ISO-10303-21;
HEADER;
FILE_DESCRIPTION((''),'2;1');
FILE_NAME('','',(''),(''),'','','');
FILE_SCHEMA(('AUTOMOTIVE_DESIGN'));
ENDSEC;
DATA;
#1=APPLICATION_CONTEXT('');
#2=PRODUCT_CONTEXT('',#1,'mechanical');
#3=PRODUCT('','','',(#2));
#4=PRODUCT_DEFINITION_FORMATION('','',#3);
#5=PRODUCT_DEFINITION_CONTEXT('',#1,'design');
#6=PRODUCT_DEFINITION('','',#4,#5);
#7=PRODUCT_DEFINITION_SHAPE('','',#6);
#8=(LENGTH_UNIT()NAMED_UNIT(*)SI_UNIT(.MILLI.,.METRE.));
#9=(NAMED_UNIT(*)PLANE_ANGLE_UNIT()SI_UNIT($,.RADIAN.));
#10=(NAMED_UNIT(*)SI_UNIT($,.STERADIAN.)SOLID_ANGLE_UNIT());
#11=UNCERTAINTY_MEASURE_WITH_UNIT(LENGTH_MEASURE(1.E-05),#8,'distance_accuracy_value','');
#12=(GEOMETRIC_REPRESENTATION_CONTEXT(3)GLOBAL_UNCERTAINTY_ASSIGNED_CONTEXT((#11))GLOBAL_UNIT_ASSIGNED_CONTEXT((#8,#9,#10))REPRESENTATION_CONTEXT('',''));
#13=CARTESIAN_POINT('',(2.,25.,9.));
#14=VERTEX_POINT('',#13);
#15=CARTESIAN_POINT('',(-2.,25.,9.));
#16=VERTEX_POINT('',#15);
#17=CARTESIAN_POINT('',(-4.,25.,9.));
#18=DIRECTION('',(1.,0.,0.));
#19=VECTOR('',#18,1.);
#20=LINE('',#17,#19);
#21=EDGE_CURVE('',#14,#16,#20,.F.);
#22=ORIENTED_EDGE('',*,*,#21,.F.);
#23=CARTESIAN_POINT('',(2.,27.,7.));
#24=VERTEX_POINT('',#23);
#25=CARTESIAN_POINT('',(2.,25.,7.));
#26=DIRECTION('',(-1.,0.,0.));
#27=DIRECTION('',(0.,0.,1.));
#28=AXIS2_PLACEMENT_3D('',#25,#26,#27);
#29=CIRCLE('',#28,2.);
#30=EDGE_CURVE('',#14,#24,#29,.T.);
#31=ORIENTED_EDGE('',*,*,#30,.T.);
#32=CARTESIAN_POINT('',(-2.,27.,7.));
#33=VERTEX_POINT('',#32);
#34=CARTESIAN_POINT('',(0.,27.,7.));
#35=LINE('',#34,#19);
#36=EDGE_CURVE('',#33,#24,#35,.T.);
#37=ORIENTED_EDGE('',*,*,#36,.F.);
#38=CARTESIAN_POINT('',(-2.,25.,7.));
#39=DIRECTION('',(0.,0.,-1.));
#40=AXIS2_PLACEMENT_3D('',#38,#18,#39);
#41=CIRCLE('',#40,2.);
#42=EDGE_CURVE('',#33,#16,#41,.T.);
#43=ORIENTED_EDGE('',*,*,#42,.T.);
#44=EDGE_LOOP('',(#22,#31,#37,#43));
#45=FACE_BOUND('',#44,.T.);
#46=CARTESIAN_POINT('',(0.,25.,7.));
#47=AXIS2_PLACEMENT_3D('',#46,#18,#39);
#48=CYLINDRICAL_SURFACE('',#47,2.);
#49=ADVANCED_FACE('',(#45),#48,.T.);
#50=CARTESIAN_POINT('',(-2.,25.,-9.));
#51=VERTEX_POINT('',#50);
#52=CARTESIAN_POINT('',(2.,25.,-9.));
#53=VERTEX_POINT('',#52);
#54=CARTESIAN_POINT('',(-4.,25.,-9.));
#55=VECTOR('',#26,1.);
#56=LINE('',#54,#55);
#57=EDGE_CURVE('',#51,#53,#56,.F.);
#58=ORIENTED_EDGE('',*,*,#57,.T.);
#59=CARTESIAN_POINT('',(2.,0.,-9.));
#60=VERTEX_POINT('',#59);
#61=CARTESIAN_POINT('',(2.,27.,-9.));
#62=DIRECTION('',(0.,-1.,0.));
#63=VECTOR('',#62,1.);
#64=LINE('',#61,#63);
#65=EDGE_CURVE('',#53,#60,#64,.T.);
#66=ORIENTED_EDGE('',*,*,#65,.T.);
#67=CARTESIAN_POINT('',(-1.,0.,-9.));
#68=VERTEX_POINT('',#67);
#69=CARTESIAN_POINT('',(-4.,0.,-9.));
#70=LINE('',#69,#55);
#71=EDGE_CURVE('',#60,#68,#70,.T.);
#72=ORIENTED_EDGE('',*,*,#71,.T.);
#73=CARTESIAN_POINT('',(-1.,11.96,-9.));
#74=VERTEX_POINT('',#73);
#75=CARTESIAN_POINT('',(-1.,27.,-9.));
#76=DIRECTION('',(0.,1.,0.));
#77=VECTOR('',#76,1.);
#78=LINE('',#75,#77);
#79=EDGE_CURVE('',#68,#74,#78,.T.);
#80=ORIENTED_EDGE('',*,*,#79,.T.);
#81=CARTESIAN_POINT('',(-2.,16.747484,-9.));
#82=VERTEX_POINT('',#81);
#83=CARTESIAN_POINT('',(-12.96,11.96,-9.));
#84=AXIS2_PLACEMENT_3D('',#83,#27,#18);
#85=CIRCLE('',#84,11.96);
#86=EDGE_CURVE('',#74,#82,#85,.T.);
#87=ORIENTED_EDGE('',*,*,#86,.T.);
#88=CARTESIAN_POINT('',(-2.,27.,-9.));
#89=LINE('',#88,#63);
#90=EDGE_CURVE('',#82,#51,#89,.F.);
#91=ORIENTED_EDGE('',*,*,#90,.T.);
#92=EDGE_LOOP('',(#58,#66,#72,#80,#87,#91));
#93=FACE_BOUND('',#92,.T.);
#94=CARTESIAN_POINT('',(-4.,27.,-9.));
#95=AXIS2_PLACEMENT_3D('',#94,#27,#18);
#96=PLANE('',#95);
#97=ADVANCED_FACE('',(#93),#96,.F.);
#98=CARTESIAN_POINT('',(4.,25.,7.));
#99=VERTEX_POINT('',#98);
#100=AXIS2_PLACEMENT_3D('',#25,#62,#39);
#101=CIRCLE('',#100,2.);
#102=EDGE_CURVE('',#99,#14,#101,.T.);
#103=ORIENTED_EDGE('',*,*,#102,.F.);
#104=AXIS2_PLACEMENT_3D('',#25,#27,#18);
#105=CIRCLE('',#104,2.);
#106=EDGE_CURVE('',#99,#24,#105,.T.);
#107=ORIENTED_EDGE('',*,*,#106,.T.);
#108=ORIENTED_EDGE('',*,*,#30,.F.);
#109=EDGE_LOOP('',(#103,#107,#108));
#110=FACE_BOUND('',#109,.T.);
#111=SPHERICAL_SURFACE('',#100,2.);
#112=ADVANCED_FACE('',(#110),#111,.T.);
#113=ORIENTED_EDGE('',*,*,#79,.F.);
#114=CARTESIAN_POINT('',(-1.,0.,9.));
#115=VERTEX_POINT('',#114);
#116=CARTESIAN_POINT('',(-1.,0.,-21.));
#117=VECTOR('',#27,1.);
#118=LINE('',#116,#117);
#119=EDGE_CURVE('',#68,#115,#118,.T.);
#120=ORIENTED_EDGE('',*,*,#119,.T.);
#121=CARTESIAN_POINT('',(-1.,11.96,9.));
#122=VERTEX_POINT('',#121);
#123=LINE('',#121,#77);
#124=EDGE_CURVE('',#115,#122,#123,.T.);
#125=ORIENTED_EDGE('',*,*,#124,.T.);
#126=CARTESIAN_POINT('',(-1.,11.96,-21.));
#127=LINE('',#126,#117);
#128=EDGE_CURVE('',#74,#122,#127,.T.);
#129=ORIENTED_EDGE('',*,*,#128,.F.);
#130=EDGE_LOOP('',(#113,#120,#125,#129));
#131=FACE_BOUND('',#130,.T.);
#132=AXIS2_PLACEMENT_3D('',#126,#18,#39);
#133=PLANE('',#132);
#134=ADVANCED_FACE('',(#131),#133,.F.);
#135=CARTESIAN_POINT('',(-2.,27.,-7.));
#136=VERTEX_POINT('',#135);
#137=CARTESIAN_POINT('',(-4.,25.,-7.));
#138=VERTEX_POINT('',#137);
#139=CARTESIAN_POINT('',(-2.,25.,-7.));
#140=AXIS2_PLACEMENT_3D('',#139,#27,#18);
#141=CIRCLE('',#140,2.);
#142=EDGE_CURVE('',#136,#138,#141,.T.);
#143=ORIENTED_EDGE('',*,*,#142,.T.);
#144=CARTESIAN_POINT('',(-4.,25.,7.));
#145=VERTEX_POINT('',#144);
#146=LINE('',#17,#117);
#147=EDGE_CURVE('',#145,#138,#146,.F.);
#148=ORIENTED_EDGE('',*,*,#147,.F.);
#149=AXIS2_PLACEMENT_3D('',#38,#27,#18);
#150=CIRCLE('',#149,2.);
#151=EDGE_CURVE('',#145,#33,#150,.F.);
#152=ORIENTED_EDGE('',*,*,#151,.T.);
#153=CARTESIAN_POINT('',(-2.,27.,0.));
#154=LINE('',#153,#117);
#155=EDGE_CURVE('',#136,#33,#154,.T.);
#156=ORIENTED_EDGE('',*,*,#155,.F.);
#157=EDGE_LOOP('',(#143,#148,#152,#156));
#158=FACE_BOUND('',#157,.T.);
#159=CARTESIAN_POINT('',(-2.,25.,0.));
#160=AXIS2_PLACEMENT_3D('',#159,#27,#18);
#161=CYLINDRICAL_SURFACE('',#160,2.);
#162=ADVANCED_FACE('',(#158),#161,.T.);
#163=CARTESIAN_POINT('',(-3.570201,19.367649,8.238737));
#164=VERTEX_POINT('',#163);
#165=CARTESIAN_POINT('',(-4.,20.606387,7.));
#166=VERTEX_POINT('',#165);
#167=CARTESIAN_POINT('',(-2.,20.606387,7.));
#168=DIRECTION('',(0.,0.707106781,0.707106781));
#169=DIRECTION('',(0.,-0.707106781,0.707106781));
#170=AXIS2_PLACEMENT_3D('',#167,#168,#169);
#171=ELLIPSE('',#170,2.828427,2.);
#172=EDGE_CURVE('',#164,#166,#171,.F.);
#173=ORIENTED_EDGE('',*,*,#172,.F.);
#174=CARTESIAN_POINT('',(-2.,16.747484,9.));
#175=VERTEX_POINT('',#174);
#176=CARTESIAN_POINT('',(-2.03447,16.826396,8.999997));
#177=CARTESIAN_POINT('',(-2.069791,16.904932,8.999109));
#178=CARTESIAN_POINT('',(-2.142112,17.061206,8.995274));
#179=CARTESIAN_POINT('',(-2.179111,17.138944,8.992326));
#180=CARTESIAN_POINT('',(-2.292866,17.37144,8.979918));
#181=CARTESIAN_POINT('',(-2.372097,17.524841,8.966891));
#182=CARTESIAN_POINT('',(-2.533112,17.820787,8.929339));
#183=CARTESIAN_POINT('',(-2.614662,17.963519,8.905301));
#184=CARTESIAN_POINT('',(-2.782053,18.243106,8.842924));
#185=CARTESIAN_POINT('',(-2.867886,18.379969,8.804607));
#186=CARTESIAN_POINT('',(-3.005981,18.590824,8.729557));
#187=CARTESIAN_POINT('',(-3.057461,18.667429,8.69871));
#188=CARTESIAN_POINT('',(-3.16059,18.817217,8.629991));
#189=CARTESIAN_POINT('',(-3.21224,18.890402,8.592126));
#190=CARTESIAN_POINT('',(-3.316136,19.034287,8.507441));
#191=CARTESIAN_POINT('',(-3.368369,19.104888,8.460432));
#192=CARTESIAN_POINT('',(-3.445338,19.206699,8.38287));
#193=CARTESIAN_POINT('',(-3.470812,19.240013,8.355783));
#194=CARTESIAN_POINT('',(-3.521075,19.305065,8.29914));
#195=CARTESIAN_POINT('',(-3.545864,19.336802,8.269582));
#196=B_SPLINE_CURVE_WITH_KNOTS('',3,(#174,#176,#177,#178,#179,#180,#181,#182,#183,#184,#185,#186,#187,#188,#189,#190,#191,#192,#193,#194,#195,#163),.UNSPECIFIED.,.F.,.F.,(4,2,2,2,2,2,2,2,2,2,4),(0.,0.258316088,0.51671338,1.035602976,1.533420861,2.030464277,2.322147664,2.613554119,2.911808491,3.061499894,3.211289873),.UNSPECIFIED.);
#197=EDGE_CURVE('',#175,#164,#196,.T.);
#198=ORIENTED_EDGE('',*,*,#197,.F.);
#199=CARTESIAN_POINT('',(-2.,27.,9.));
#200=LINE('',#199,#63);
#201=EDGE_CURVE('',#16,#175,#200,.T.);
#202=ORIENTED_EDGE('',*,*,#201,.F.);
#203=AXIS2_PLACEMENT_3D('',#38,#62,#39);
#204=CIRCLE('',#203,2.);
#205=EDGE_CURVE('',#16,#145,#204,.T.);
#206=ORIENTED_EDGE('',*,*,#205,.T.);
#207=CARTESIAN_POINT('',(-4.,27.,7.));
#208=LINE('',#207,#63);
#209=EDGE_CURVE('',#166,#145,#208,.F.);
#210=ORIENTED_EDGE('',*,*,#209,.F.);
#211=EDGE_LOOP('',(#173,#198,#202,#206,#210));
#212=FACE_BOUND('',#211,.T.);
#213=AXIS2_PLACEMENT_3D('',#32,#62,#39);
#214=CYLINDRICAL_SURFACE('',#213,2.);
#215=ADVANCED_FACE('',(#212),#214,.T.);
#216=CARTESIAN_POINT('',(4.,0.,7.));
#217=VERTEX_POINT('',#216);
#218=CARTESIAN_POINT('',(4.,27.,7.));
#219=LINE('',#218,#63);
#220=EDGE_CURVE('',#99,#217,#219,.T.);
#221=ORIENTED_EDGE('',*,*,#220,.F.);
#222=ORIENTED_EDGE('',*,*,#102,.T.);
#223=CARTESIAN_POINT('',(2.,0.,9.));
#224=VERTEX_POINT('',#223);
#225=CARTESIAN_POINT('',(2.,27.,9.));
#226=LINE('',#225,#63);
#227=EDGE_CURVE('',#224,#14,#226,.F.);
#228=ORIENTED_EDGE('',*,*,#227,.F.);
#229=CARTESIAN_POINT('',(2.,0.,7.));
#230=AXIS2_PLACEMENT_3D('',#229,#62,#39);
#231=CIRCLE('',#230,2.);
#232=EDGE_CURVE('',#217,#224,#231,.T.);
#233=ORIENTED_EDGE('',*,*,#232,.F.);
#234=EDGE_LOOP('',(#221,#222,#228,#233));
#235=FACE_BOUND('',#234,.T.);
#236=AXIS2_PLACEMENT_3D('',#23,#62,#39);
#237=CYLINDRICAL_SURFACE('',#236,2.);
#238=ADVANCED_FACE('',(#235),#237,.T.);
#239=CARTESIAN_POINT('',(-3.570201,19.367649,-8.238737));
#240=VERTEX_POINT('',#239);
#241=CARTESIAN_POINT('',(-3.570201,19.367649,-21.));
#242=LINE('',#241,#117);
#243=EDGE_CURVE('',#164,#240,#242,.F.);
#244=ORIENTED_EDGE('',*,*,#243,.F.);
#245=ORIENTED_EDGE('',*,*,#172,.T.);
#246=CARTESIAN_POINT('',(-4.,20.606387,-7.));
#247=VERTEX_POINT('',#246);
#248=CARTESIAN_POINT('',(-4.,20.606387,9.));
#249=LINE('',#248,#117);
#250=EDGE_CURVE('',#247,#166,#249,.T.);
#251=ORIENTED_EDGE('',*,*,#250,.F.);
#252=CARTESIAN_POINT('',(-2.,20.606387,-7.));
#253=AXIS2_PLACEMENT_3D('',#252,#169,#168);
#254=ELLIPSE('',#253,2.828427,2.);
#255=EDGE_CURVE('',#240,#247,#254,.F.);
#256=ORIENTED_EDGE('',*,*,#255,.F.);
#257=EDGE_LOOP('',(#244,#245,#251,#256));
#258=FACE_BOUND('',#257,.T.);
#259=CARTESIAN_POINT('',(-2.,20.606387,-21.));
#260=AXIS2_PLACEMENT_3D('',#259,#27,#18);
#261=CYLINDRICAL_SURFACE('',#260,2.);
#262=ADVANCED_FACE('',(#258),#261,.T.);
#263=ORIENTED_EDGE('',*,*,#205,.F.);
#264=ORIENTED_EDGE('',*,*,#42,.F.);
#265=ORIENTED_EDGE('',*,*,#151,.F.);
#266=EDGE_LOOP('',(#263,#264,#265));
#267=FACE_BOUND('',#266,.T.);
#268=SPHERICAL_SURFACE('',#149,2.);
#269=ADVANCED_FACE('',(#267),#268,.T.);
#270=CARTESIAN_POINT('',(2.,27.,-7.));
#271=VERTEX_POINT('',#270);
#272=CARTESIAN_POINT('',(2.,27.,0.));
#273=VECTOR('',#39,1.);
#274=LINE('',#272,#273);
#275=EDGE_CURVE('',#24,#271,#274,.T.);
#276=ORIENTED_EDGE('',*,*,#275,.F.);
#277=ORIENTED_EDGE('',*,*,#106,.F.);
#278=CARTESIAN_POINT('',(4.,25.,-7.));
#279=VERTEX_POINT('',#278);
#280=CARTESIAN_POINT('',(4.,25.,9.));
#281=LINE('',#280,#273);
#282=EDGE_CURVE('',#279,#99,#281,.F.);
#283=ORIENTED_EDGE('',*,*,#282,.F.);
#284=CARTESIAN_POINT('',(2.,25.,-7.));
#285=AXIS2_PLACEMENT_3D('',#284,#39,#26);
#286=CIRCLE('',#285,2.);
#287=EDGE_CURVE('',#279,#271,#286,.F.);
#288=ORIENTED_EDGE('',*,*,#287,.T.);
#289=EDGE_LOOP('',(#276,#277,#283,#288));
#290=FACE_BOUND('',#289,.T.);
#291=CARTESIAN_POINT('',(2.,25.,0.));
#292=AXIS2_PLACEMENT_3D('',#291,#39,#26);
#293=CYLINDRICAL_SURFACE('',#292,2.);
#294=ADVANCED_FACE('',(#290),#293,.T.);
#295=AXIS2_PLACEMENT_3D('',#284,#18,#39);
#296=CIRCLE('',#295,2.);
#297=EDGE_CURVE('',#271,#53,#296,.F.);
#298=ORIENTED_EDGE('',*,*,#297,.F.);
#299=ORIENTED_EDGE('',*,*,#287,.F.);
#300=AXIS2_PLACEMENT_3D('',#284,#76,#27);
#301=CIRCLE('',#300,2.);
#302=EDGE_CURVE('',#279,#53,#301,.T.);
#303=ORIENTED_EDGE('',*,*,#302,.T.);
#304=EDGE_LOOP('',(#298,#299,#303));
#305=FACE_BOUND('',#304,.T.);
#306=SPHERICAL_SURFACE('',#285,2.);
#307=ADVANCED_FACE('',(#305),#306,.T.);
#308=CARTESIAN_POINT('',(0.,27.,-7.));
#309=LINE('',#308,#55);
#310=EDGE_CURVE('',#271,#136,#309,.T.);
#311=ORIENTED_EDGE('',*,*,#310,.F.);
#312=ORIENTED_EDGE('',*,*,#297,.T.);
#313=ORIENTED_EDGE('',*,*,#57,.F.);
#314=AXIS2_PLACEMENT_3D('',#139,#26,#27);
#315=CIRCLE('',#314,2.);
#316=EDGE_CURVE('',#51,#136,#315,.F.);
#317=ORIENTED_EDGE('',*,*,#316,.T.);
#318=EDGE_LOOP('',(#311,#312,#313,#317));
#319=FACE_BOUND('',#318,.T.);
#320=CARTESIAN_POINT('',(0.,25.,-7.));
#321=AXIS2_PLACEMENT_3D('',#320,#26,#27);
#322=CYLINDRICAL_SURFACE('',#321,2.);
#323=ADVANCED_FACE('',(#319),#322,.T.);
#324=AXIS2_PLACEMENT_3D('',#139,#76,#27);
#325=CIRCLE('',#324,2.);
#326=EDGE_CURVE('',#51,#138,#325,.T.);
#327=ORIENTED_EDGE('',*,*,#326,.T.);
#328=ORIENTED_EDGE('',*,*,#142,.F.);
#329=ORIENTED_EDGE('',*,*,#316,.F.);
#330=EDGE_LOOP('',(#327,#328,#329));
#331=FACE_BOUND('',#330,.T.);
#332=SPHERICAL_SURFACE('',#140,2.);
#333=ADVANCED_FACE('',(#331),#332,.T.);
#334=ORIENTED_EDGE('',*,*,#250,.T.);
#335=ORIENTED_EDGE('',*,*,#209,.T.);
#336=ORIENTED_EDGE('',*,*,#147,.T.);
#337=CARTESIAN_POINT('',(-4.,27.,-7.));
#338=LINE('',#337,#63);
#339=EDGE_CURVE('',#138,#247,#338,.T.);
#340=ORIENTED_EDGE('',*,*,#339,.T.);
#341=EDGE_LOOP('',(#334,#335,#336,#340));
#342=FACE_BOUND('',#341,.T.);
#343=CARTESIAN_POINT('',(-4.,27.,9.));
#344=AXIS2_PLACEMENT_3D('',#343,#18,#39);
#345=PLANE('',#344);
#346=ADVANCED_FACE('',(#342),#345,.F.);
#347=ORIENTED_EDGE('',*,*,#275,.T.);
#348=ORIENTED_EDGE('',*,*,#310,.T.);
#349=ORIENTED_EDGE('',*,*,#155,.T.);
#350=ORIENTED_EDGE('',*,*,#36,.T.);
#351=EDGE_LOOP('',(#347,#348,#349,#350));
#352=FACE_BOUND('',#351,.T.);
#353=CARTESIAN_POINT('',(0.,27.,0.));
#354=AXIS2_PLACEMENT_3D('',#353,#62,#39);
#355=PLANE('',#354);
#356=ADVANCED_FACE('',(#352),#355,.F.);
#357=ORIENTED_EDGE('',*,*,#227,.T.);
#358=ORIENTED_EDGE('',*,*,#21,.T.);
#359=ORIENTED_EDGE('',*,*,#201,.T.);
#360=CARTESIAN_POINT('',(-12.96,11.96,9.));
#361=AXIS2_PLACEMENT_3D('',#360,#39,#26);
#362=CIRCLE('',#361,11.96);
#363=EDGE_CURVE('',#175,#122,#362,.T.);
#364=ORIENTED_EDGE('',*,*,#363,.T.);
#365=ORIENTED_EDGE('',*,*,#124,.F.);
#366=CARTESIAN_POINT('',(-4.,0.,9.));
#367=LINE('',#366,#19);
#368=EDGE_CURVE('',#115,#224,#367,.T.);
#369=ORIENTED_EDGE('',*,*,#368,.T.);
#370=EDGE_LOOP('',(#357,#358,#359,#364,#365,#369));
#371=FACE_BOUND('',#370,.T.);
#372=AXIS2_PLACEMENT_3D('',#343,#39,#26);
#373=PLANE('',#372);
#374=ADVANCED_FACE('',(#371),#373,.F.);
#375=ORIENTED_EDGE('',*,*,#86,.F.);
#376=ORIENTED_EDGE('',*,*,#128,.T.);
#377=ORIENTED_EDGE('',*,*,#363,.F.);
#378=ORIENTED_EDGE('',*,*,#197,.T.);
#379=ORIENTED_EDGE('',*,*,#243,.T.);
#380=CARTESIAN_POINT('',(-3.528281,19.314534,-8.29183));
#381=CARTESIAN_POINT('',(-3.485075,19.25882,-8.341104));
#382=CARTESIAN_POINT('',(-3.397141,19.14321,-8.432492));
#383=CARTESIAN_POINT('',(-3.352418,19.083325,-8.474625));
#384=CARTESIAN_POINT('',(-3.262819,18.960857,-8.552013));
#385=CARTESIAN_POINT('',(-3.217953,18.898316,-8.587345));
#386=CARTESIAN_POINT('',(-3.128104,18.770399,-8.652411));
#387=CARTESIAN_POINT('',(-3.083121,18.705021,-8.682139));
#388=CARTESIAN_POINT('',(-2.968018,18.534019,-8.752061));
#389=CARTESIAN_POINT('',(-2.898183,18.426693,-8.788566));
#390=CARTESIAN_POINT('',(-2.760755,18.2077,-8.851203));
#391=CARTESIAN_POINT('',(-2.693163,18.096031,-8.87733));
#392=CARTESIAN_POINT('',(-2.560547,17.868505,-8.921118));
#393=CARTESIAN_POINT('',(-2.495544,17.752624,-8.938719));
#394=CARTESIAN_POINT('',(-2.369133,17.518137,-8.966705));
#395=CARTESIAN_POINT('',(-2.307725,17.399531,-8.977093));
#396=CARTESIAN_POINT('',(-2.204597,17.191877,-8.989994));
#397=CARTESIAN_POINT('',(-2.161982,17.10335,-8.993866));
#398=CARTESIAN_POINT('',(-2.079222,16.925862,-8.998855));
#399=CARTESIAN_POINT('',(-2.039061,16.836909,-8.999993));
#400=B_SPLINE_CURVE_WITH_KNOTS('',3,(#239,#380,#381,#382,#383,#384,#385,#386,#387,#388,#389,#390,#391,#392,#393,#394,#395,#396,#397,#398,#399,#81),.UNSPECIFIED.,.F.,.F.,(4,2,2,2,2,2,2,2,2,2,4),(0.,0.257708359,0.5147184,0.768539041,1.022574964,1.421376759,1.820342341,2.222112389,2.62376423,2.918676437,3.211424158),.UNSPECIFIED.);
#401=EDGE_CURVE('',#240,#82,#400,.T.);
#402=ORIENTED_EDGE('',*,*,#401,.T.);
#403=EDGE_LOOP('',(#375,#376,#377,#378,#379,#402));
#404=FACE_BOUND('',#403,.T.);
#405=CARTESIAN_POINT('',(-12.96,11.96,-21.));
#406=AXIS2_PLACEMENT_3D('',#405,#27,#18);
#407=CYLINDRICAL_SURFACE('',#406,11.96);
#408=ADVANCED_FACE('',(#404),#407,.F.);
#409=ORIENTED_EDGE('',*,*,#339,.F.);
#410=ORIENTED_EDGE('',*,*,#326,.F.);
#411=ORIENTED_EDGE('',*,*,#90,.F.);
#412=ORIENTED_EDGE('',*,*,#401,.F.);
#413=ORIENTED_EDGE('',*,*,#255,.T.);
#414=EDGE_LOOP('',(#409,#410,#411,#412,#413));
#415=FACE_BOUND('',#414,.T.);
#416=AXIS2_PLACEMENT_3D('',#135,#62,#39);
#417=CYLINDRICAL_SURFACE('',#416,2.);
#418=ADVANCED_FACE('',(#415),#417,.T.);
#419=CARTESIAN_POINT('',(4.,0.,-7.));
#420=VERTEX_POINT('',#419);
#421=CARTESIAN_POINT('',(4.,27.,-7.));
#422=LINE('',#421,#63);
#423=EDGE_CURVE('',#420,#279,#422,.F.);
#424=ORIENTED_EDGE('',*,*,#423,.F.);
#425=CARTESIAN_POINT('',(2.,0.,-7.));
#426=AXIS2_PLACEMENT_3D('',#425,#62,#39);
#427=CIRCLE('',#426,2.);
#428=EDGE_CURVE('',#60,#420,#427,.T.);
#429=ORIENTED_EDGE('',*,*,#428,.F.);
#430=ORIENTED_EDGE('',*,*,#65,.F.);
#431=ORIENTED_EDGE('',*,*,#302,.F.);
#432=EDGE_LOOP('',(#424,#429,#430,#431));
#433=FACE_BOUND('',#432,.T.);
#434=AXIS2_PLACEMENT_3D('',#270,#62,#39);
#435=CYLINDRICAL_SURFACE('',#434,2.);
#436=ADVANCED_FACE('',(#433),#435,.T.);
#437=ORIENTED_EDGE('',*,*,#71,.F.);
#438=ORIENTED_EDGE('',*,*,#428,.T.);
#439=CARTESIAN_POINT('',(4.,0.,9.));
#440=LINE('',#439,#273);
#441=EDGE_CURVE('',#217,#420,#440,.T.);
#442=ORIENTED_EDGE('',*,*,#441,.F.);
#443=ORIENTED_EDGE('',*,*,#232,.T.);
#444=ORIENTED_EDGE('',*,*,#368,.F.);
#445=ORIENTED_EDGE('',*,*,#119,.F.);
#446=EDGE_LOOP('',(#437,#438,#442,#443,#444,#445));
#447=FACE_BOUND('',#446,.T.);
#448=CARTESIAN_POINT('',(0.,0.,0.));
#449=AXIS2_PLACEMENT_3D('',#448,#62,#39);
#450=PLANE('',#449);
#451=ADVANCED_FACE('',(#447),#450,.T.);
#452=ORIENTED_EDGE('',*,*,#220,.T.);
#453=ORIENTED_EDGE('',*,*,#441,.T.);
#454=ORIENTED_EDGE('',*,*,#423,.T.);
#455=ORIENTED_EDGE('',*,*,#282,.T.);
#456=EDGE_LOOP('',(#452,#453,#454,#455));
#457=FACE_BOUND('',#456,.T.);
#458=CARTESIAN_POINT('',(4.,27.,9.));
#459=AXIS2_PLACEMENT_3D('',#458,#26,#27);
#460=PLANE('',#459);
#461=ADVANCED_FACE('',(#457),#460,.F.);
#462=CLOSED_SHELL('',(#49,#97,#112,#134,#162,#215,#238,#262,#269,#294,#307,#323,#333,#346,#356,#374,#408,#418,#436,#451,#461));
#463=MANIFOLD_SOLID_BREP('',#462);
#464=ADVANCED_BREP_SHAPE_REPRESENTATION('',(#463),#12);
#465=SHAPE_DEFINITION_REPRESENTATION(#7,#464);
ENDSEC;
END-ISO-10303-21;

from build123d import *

# Parameters (mm, degrees)
SKETCH1_W           = 8
SKETCH1_H           = 18
BOSS_EXTRUDE1_DEPTH = 27
SKETCH2_R           = 11.96
CUT_EXTRUDE1_DEPTH  = 30
SKETCH3_W           = 3.757980454
SKETCH3_H           = 11.96
CUT_EXTRUDE2_DEPTH  = 30
FILLET1_R           = 2
FILLET2_R           = 2
FILLET3_R           = 2


with BuildPart() as part:
    # Sketch1 → Boss-Extrude1 (new body)
    with BuildSketch(Plane(origin=(0, 0, 0), x_dir=(1, 0, 0), z_dir=(0, 1, 0))):
        Rectangle(SKETCH1_W, SKETCH1_H)
    extrude(amount=BOSS_EXTRUDE1_DEPTH)

    # Sketch2 → Cut-Extrude1 (cut)
    with BuildSketch(Plane.XY.offset(9)):
        with Locations((-12.96, 11.96)):
            Circle(SKETCH2_R)
    extrude(amount=-CUT_EXTRUDE1_DEPTH, mode=Mode.SUBTRACT)

    # Sketch3 → Cut-Extrude2 (cut)
    with BuildSketch(Plane.XY.offset(9)):
        with Locations((-2.878990227, 5.98)):
            Rectangle(SKETCH3_W, SKETCH3_H)
    extrude(amount=-CUT_EXTRUDE2_DEPTH, mode=Mode.SUBTRACT)

    # Fillet1
    fillet1_edges = [part.edges().sort_by_distance(p)[0] for p in [
        (4, 13.5, 9),
    ]]
    fillet(fillet1_edges, radius=FILLET1_R)

    # Fillet2
    fillet2_edges = [part.edges().sort_by_distance(p)[0] for p in [
        (-4, 27, 0),
        (-1, 27, 9),
        (4, 27, -1),
        (3.414213562, 27, 8.414213562),
        (4, 13.5, -9),
        (0, 27, -9),
    ]]
    fillet(fillet2_edges, radius=FILLET2_R)

    # Fillet3
    # the kernel refuses this fillet: 2 mm, written as the material it takes off along each edge
    with BuildSketch(Plane(origin=(-2, 25, -7), x_dir=(0, 0, -1), z_dir=(-1, 0, 0))) as fillet3_piece_1_section:
        Polygon((0, 0), (FILLET3_R, 0), (FILLET3_R, -FILLET3_R), (0, -FILLET3_R), align=None)
    fillet3_piece_1 = extrude(amount=FILLET3_R, mode=Mode.PRIVATE)
    fillet3_piece_1 = fillet3_piece_1 - Plane(origin=(-2, 25, -7), x_dir=(0, -0.7071067811865475, 0.7071067811865475), z_dir=(-1, 0, 0)) * Sphere(FILLET3_R, mode=Mode.PRIVATE)
    add(fillet3_piece_1, mode=Mode.SUBTRACT)
    with BuildSketch(Plane(origin=(-2, 25, 7), x_dir=(-1, 0, 0), z_dir=(0, 0, 1))) as fillet3_piece_2_section:
        Polygon((0, 0), (FILLET3_R, 0), (FILLET3_R, -FILLET3_R), (0, -FILLET3_R), align=None)
    fillet3_piece_2 = extrude(amount=FILLET3_R, mode=Mode.PRIVATE)
    fillet3_piece_2 = fillet3_piece_2 - Plane(origin=(-2, 25, 7), x_dir=(0.7071067811865475, -0.7071067811865475, 0), z_dir=(0, 0, 1)) * Sphere(FILLET3_R, mode=Mode.PRIVATE)
    add(fillet3_piece_2, mode=Mode.SUBTRACT)
    with BuildSketch(Plane(origin=(-4, 19.882120928, -10.810664001), x_dir=(0, 1, 0), z_dir=(0, 0, 1))) as fillet3_piece_3:
        with BuildLine():
            CenterArc((0.7242656, -2), FILLET3_R, 90, 38.270045509)
            ThreePointArc((-0.514471725, -0.429799427), (-0.254223892, -0.218505055), (0, 0))
            Line((0, 0), (0.7242656, 0))
        make_face()
    extrude(amount=21.621328002, mode=Mode.SUBTRACT)
    with BuildSketch(Plane(origin=(-4, 14.882120928, 9), x_dir=(1, 0, 0), z_dir=(0, 1, 0)), Plane(origin=(-4, 14.882120928, -9), x_dir=(0, 0, 1), z_dir=(0, 1, 0))) as fillet3_piece_4:
        with BuildLine():
            CenterArc((FILLET3_R, FILLET3_R), FILLET3_R, 180, 90)
            Line((0, FILLET3_R), (0, 0))
            Line((0, 0), (FILLET3_R, 0))
        make_face()
    extrude(amount=10.117879072, mode=Mode.SUBTRACT)


solid = part.part
